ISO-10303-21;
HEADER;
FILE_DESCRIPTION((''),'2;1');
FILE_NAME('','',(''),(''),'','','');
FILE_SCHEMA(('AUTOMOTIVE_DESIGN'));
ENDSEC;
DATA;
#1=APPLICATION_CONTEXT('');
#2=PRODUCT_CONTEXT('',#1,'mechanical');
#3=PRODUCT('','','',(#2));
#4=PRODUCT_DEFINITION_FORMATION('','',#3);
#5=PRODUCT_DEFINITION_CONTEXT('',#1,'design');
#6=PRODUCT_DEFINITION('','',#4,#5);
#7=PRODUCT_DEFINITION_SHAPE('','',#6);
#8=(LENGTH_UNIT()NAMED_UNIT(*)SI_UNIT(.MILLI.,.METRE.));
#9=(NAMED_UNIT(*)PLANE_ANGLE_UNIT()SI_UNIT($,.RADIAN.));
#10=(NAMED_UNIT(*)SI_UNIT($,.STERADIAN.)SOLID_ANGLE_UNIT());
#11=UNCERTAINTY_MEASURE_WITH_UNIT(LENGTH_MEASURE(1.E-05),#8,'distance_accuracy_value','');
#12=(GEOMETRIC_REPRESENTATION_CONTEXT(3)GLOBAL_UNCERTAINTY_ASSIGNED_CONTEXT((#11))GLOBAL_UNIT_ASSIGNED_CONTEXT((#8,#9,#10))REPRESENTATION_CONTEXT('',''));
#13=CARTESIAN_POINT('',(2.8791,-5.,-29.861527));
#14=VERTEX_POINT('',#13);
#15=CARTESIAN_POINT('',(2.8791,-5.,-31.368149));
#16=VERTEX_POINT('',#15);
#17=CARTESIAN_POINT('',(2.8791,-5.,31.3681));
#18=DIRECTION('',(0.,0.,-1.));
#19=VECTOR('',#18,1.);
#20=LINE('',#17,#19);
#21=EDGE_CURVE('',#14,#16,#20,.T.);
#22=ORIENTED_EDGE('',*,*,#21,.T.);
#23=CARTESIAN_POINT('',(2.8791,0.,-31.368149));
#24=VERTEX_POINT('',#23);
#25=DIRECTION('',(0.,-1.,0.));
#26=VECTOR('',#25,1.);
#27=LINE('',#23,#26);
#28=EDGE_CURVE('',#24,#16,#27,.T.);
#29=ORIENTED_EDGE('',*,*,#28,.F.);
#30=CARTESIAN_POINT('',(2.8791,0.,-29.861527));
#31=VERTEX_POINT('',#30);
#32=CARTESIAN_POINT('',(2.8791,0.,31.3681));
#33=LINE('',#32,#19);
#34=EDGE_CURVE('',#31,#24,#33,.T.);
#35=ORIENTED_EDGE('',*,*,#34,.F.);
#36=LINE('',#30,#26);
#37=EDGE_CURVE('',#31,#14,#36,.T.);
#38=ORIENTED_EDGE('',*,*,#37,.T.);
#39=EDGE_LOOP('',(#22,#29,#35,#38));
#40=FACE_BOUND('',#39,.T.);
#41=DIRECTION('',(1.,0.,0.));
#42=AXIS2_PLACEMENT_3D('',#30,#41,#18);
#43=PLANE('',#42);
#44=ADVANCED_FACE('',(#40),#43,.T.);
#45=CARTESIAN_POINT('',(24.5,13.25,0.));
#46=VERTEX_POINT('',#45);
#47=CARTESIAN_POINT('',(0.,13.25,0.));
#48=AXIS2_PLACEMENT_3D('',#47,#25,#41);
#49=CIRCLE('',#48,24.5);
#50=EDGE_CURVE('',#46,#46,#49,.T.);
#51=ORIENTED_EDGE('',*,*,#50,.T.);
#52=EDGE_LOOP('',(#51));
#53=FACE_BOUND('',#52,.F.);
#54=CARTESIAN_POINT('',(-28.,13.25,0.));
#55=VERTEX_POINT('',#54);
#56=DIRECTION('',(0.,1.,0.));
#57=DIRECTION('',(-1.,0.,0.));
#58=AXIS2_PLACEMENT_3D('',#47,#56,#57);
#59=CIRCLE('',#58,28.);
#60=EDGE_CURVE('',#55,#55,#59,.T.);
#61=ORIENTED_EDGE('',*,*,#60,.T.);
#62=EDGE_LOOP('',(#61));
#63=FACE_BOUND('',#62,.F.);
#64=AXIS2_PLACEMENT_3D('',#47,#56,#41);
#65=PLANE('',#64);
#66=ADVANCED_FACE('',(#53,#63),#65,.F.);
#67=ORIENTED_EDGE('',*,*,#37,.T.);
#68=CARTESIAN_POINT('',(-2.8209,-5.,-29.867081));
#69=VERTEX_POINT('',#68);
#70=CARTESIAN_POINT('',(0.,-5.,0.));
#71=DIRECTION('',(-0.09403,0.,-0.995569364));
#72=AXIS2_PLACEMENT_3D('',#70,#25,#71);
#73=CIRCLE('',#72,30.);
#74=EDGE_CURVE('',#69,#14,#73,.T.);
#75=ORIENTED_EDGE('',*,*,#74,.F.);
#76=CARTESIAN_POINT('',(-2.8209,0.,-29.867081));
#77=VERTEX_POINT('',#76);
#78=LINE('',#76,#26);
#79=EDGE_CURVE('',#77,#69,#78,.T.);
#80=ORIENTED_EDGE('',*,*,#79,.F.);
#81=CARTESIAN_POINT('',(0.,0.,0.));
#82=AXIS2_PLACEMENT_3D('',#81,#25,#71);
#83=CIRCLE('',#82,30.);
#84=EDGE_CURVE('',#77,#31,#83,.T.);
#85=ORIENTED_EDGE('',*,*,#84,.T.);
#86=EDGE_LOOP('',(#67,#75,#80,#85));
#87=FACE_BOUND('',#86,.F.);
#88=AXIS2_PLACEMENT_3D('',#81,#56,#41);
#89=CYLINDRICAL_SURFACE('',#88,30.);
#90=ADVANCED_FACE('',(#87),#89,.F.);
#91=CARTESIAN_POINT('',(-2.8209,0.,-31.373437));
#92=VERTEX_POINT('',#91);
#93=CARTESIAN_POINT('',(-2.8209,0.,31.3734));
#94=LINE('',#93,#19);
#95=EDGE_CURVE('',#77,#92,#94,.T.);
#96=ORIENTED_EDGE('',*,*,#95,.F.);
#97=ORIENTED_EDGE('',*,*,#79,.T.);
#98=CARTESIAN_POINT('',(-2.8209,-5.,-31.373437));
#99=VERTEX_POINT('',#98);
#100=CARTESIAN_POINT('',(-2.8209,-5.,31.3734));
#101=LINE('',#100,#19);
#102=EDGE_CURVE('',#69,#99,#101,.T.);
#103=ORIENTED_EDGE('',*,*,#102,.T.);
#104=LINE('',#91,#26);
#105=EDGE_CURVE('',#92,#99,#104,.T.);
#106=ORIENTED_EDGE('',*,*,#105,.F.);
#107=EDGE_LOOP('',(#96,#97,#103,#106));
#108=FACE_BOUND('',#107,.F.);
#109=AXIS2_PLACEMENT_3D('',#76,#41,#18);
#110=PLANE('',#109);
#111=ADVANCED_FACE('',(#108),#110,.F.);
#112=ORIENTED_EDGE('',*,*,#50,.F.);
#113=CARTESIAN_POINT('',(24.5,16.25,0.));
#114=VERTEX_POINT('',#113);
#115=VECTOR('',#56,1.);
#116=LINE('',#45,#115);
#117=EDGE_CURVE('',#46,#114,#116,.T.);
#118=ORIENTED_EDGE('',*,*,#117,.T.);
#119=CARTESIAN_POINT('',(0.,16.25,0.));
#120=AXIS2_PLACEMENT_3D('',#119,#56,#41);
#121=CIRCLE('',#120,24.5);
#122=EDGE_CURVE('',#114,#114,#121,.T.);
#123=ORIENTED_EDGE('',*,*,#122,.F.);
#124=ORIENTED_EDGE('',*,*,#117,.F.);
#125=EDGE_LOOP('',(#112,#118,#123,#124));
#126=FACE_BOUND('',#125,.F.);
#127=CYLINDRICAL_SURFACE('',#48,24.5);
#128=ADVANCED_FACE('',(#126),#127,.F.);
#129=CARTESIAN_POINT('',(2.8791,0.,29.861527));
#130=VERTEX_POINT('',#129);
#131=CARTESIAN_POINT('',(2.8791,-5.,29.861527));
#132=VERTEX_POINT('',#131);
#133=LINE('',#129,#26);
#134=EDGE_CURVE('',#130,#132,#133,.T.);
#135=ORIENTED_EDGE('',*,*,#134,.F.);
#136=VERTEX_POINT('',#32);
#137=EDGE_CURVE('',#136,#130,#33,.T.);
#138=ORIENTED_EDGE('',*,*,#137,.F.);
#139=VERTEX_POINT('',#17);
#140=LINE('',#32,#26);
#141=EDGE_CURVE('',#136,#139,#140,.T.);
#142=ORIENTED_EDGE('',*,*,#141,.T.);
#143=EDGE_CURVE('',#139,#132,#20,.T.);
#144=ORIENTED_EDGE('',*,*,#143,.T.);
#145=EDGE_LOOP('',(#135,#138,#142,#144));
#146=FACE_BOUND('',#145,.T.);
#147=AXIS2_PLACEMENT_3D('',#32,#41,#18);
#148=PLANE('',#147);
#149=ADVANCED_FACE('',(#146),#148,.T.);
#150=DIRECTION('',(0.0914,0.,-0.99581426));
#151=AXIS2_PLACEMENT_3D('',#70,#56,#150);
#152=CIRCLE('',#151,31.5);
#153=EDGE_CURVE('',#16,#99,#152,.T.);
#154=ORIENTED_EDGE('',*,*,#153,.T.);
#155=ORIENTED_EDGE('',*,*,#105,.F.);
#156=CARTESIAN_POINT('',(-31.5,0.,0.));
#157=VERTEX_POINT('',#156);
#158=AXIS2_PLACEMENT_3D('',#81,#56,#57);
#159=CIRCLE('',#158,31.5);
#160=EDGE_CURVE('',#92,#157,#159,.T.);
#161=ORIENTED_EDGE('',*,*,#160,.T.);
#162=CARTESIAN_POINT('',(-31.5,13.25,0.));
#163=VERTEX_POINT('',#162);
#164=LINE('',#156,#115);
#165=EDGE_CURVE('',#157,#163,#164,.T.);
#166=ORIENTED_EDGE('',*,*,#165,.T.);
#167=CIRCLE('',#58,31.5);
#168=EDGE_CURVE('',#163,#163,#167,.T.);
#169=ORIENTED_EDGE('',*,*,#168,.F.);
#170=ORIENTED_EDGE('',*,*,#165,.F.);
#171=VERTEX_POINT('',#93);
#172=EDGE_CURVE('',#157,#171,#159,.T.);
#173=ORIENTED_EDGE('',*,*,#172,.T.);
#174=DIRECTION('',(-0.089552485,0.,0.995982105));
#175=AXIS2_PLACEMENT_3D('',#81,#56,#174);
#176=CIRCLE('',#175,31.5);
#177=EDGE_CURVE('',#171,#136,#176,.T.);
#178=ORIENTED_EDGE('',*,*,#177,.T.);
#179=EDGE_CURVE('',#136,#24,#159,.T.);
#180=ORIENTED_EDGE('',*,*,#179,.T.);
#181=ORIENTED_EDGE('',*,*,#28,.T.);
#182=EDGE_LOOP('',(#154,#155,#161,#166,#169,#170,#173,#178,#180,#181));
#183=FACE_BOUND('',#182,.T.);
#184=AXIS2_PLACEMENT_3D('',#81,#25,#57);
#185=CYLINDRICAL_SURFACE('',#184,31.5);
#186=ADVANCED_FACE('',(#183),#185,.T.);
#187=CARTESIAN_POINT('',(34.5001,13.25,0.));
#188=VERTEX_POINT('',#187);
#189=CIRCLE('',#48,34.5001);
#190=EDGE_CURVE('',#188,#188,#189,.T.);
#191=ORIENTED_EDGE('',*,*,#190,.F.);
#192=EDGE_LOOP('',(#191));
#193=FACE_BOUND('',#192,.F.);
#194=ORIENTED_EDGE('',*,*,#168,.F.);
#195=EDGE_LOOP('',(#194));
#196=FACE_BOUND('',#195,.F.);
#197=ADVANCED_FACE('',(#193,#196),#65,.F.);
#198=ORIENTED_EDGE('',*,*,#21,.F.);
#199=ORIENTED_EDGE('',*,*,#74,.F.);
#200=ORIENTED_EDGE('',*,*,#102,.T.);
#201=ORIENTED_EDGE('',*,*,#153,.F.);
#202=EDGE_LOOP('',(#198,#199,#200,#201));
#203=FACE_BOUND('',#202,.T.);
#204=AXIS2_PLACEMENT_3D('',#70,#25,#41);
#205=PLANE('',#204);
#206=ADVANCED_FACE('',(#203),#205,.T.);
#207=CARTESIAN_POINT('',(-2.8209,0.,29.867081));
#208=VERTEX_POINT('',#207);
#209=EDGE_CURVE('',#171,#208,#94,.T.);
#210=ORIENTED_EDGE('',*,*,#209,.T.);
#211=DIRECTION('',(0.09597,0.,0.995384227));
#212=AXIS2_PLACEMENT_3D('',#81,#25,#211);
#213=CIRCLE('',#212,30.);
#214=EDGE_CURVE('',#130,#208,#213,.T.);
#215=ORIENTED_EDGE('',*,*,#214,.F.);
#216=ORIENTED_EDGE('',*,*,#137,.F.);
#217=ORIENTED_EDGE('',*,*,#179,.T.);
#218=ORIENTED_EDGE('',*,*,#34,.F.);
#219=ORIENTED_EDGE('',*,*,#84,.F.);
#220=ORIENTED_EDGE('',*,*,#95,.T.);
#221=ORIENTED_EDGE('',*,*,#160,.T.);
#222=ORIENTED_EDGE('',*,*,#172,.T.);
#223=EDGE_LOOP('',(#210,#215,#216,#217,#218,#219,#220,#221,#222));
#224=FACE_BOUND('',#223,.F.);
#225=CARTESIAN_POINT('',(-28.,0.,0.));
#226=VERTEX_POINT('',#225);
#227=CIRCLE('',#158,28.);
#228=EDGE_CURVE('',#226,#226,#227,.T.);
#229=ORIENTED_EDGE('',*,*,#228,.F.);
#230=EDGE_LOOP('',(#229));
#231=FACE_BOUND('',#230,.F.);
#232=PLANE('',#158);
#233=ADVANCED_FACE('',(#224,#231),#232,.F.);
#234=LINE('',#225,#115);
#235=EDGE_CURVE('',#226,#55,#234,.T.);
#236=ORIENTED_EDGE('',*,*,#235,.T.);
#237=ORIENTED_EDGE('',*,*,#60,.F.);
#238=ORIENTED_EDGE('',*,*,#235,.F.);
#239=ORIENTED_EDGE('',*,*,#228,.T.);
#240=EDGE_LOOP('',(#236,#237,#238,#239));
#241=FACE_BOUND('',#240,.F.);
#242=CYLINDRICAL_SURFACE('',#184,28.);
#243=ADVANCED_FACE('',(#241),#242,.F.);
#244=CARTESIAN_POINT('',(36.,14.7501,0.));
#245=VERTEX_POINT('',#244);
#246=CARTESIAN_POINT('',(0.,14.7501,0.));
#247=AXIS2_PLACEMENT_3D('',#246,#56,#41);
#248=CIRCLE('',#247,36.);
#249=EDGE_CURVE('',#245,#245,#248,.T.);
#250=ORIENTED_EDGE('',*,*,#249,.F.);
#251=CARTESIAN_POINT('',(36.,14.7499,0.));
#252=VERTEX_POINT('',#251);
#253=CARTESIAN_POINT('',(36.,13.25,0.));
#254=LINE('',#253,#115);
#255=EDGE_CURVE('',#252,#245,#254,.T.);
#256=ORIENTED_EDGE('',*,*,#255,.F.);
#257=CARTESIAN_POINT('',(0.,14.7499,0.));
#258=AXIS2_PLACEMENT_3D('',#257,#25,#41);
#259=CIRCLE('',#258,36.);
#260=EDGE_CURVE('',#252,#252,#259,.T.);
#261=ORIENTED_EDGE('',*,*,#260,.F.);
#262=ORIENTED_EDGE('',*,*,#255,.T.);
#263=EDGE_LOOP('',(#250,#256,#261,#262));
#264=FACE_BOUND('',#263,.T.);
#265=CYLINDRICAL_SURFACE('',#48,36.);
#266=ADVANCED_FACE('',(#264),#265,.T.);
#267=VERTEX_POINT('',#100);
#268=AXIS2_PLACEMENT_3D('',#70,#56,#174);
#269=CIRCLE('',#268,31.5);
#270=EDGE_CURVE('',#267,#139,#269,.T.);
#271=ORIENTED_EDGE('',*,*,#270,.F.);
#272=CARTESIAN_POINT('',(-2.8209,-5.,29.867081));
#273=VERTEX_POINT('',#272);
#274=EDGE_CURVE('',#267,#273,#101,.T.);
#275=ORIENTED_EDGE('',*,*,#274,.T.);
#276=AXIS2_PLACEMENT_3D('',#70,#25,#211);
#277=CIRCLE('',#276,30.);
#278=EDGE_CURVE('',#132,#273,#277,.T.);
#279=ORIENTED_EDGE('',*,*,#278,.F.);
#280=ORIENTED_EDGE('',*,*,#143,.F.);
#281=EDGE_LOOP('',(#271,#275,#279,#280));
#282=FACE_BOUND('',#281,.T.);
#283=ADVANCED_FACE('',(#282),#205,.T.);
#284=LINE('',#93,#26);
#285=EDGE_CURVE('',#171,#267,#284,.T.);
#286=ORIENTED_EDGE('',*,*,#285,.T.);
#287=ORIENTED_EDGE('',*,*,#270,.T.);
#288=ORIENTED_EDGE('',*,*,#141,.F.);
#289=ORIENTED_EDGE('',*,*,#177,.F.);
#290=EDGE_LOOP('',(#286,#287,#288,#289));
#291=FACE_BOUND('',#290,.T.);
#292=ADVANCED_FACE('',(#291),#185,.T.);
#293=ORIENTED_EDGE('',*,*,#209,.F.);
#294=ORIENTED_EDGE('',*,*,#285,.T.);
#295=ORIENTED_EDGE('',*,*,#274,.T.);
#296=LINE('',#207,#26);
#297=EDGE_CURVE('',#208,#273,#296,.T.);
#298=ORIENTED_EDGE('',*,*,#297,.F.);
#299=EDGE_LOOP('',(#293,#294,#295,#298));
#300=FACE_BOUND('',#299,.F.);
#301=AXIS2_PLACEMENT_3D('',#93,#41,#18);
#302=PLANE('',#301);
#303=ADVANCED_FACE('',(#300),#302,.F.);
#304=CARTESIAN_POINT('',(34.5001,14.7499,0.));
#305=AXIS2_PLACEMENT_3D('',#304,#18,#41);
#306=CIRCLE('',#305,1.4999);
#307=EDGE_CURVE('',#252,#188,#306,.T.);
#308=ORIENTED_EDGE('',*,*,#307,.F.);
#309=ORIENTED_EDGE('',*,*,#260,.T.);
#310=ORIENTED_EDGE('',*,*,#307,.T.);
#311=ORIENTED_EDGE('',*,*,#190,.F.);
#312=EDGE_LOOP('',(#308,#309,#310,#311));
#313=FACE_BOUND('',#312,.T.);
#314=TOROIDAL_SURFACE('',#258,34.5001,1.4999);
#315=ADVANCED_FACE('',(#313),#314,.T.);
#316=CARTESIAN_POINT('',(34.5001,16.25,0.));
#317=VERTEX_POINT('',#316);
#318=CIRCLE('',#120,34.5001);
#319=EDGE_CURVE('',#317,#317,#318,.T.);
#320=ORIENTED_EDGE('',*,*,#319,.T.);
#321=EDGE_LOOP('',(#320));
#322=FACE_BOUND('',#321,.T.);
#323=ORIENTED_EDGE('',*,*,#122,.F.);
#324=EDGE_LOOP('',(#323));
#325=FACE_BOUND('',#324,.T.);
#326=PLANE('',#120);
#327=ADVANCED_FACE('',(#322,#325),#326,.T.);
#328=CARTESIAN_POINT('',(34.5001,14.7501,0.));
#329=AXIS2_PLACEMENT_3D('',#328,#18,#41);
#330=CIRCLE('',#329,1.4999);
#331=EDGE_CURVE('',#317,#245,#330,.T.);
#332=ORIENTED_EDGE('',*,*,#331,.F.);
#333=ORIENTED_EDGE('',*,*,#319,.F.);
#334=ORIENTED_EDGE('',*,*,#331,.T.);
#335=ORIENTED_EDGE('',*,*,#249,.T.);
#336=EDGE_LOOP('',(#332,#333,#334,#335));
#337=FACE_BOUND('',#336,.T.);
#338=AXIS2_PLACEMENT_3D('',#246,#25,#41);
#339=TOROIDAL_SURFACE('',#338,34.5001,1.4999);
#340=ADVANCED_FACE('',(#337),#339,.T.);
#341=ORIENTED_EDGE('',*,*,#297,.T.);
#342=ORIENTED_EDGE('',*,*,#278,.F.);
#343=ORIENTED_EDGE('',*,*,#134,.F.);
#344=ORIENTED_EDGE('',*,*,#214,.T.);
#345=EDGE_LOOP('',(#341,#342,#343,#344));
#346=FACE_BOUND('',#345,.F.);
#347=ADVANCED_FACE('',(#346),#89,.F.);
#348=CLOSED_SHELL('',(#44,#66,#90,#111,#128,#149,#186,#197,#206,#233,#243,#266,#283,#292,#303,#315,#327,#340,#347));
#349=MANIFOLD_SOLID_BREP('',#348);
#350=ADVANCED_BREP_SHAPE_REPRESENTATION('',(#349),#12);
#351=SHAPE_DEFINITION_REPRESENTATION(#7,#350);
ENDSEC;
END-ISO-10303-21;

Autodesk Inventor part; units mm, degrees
ref_plane "YZ Plane" through (0, 0, 0) normal (1, 0, 0) x (0, 1, 0)
ref_plane "XZ Plane" through (0, 0, 0) normal (0, 1, 0) x (-1, 0, 0)
ref_plane "XY Plane" through (0, 0, 0) normal (0, 0, 1) x (1, 0, 0)
sketch "Sketch1" plane through (0, 0, 0) normal (0, 1, 0) x (-1, 0, 0)
  circle A0 centre (0, 0) radius 28
  line L0 (28, 0) -> (31.5, 0)
  circle A1 centre (0, 0) radius 31.5
  circle A2 centre (0, 0) radius 31.5
  circle A3 centre (0, 0) radius 31.5
  dimension "d0" = 56
  dimension "d1" = 3.5
extrude "Extrusion1" add sketch "Sketch1" along normal blind 13.25
sketch "Sketch2" plane through (0, 13.25, 0) normal (0, 1, 0) x (1, 0, 0)
  circle A0 centre (0, 0) radius 28 projected
  line L0 (0, -28) -> (0, -24.5)
  line L1 (0, -24.5) -> (0, -31.5)
  circle A1 centre (0, 0) radius 31.5 projected
  line L2 (0, -31.5) -> (0, -36)
  circle A2 centre (0, 0) radius 24.5
  circle A3 centre (0, 0) radius 36
  dimension "d4" = 3.5
  dimension "d5" = 4.5
extrude "Extrusion2" add sketch "Sketch2" along normal blind 3 contours A0 | A1 | A3
sketch "Sketch3" plane through (0, 0, 0) normal (0, -1, 0) x (1, 0, 0)
  circle A0 centre (0, 0) radius 31.5 projected
  line L0 (0.0291, 31.5) -> (0.0291, -31.5)
  line L1 (2.8791, 31.3681) -> (2.8791, -35.492)
  line L2 (-2.8209, 31.3734) -> (-2.8209, -35.492)
  circle A1 centre (0, 0) radius 31.5
  circle A2 centre (0, 0) radius 30
  point P0 (2.8791, 29.8615)
  point P1 (2.8791, 31.3681)
  point P2 (-2.8209, 31.3734)
  point P3 (-2.8209, 29.8671)
  point P4 (2.8791, -29.8615)
  point P5 (-2.8209, -29.8671)
  point P6 (-2.8209, -31.3734)
  point P7 (2.8791, -31.3681)
  dimension "d8" = 2.85
  dimension "d9" = 2.85
extrude "Extrusion3" add sketch "Sketch3" along normal blind 5 contours L1 A2 L0 A0 | A0 L0 A2 L1 | L0 A2 L2 A0 | A0 L2 A2 L0
fillet "Fillet1" radius 1.5 2 edges at (-36, 13.25, 0) (-36, 16.25, 0)
properties part number "vez-rotate"
